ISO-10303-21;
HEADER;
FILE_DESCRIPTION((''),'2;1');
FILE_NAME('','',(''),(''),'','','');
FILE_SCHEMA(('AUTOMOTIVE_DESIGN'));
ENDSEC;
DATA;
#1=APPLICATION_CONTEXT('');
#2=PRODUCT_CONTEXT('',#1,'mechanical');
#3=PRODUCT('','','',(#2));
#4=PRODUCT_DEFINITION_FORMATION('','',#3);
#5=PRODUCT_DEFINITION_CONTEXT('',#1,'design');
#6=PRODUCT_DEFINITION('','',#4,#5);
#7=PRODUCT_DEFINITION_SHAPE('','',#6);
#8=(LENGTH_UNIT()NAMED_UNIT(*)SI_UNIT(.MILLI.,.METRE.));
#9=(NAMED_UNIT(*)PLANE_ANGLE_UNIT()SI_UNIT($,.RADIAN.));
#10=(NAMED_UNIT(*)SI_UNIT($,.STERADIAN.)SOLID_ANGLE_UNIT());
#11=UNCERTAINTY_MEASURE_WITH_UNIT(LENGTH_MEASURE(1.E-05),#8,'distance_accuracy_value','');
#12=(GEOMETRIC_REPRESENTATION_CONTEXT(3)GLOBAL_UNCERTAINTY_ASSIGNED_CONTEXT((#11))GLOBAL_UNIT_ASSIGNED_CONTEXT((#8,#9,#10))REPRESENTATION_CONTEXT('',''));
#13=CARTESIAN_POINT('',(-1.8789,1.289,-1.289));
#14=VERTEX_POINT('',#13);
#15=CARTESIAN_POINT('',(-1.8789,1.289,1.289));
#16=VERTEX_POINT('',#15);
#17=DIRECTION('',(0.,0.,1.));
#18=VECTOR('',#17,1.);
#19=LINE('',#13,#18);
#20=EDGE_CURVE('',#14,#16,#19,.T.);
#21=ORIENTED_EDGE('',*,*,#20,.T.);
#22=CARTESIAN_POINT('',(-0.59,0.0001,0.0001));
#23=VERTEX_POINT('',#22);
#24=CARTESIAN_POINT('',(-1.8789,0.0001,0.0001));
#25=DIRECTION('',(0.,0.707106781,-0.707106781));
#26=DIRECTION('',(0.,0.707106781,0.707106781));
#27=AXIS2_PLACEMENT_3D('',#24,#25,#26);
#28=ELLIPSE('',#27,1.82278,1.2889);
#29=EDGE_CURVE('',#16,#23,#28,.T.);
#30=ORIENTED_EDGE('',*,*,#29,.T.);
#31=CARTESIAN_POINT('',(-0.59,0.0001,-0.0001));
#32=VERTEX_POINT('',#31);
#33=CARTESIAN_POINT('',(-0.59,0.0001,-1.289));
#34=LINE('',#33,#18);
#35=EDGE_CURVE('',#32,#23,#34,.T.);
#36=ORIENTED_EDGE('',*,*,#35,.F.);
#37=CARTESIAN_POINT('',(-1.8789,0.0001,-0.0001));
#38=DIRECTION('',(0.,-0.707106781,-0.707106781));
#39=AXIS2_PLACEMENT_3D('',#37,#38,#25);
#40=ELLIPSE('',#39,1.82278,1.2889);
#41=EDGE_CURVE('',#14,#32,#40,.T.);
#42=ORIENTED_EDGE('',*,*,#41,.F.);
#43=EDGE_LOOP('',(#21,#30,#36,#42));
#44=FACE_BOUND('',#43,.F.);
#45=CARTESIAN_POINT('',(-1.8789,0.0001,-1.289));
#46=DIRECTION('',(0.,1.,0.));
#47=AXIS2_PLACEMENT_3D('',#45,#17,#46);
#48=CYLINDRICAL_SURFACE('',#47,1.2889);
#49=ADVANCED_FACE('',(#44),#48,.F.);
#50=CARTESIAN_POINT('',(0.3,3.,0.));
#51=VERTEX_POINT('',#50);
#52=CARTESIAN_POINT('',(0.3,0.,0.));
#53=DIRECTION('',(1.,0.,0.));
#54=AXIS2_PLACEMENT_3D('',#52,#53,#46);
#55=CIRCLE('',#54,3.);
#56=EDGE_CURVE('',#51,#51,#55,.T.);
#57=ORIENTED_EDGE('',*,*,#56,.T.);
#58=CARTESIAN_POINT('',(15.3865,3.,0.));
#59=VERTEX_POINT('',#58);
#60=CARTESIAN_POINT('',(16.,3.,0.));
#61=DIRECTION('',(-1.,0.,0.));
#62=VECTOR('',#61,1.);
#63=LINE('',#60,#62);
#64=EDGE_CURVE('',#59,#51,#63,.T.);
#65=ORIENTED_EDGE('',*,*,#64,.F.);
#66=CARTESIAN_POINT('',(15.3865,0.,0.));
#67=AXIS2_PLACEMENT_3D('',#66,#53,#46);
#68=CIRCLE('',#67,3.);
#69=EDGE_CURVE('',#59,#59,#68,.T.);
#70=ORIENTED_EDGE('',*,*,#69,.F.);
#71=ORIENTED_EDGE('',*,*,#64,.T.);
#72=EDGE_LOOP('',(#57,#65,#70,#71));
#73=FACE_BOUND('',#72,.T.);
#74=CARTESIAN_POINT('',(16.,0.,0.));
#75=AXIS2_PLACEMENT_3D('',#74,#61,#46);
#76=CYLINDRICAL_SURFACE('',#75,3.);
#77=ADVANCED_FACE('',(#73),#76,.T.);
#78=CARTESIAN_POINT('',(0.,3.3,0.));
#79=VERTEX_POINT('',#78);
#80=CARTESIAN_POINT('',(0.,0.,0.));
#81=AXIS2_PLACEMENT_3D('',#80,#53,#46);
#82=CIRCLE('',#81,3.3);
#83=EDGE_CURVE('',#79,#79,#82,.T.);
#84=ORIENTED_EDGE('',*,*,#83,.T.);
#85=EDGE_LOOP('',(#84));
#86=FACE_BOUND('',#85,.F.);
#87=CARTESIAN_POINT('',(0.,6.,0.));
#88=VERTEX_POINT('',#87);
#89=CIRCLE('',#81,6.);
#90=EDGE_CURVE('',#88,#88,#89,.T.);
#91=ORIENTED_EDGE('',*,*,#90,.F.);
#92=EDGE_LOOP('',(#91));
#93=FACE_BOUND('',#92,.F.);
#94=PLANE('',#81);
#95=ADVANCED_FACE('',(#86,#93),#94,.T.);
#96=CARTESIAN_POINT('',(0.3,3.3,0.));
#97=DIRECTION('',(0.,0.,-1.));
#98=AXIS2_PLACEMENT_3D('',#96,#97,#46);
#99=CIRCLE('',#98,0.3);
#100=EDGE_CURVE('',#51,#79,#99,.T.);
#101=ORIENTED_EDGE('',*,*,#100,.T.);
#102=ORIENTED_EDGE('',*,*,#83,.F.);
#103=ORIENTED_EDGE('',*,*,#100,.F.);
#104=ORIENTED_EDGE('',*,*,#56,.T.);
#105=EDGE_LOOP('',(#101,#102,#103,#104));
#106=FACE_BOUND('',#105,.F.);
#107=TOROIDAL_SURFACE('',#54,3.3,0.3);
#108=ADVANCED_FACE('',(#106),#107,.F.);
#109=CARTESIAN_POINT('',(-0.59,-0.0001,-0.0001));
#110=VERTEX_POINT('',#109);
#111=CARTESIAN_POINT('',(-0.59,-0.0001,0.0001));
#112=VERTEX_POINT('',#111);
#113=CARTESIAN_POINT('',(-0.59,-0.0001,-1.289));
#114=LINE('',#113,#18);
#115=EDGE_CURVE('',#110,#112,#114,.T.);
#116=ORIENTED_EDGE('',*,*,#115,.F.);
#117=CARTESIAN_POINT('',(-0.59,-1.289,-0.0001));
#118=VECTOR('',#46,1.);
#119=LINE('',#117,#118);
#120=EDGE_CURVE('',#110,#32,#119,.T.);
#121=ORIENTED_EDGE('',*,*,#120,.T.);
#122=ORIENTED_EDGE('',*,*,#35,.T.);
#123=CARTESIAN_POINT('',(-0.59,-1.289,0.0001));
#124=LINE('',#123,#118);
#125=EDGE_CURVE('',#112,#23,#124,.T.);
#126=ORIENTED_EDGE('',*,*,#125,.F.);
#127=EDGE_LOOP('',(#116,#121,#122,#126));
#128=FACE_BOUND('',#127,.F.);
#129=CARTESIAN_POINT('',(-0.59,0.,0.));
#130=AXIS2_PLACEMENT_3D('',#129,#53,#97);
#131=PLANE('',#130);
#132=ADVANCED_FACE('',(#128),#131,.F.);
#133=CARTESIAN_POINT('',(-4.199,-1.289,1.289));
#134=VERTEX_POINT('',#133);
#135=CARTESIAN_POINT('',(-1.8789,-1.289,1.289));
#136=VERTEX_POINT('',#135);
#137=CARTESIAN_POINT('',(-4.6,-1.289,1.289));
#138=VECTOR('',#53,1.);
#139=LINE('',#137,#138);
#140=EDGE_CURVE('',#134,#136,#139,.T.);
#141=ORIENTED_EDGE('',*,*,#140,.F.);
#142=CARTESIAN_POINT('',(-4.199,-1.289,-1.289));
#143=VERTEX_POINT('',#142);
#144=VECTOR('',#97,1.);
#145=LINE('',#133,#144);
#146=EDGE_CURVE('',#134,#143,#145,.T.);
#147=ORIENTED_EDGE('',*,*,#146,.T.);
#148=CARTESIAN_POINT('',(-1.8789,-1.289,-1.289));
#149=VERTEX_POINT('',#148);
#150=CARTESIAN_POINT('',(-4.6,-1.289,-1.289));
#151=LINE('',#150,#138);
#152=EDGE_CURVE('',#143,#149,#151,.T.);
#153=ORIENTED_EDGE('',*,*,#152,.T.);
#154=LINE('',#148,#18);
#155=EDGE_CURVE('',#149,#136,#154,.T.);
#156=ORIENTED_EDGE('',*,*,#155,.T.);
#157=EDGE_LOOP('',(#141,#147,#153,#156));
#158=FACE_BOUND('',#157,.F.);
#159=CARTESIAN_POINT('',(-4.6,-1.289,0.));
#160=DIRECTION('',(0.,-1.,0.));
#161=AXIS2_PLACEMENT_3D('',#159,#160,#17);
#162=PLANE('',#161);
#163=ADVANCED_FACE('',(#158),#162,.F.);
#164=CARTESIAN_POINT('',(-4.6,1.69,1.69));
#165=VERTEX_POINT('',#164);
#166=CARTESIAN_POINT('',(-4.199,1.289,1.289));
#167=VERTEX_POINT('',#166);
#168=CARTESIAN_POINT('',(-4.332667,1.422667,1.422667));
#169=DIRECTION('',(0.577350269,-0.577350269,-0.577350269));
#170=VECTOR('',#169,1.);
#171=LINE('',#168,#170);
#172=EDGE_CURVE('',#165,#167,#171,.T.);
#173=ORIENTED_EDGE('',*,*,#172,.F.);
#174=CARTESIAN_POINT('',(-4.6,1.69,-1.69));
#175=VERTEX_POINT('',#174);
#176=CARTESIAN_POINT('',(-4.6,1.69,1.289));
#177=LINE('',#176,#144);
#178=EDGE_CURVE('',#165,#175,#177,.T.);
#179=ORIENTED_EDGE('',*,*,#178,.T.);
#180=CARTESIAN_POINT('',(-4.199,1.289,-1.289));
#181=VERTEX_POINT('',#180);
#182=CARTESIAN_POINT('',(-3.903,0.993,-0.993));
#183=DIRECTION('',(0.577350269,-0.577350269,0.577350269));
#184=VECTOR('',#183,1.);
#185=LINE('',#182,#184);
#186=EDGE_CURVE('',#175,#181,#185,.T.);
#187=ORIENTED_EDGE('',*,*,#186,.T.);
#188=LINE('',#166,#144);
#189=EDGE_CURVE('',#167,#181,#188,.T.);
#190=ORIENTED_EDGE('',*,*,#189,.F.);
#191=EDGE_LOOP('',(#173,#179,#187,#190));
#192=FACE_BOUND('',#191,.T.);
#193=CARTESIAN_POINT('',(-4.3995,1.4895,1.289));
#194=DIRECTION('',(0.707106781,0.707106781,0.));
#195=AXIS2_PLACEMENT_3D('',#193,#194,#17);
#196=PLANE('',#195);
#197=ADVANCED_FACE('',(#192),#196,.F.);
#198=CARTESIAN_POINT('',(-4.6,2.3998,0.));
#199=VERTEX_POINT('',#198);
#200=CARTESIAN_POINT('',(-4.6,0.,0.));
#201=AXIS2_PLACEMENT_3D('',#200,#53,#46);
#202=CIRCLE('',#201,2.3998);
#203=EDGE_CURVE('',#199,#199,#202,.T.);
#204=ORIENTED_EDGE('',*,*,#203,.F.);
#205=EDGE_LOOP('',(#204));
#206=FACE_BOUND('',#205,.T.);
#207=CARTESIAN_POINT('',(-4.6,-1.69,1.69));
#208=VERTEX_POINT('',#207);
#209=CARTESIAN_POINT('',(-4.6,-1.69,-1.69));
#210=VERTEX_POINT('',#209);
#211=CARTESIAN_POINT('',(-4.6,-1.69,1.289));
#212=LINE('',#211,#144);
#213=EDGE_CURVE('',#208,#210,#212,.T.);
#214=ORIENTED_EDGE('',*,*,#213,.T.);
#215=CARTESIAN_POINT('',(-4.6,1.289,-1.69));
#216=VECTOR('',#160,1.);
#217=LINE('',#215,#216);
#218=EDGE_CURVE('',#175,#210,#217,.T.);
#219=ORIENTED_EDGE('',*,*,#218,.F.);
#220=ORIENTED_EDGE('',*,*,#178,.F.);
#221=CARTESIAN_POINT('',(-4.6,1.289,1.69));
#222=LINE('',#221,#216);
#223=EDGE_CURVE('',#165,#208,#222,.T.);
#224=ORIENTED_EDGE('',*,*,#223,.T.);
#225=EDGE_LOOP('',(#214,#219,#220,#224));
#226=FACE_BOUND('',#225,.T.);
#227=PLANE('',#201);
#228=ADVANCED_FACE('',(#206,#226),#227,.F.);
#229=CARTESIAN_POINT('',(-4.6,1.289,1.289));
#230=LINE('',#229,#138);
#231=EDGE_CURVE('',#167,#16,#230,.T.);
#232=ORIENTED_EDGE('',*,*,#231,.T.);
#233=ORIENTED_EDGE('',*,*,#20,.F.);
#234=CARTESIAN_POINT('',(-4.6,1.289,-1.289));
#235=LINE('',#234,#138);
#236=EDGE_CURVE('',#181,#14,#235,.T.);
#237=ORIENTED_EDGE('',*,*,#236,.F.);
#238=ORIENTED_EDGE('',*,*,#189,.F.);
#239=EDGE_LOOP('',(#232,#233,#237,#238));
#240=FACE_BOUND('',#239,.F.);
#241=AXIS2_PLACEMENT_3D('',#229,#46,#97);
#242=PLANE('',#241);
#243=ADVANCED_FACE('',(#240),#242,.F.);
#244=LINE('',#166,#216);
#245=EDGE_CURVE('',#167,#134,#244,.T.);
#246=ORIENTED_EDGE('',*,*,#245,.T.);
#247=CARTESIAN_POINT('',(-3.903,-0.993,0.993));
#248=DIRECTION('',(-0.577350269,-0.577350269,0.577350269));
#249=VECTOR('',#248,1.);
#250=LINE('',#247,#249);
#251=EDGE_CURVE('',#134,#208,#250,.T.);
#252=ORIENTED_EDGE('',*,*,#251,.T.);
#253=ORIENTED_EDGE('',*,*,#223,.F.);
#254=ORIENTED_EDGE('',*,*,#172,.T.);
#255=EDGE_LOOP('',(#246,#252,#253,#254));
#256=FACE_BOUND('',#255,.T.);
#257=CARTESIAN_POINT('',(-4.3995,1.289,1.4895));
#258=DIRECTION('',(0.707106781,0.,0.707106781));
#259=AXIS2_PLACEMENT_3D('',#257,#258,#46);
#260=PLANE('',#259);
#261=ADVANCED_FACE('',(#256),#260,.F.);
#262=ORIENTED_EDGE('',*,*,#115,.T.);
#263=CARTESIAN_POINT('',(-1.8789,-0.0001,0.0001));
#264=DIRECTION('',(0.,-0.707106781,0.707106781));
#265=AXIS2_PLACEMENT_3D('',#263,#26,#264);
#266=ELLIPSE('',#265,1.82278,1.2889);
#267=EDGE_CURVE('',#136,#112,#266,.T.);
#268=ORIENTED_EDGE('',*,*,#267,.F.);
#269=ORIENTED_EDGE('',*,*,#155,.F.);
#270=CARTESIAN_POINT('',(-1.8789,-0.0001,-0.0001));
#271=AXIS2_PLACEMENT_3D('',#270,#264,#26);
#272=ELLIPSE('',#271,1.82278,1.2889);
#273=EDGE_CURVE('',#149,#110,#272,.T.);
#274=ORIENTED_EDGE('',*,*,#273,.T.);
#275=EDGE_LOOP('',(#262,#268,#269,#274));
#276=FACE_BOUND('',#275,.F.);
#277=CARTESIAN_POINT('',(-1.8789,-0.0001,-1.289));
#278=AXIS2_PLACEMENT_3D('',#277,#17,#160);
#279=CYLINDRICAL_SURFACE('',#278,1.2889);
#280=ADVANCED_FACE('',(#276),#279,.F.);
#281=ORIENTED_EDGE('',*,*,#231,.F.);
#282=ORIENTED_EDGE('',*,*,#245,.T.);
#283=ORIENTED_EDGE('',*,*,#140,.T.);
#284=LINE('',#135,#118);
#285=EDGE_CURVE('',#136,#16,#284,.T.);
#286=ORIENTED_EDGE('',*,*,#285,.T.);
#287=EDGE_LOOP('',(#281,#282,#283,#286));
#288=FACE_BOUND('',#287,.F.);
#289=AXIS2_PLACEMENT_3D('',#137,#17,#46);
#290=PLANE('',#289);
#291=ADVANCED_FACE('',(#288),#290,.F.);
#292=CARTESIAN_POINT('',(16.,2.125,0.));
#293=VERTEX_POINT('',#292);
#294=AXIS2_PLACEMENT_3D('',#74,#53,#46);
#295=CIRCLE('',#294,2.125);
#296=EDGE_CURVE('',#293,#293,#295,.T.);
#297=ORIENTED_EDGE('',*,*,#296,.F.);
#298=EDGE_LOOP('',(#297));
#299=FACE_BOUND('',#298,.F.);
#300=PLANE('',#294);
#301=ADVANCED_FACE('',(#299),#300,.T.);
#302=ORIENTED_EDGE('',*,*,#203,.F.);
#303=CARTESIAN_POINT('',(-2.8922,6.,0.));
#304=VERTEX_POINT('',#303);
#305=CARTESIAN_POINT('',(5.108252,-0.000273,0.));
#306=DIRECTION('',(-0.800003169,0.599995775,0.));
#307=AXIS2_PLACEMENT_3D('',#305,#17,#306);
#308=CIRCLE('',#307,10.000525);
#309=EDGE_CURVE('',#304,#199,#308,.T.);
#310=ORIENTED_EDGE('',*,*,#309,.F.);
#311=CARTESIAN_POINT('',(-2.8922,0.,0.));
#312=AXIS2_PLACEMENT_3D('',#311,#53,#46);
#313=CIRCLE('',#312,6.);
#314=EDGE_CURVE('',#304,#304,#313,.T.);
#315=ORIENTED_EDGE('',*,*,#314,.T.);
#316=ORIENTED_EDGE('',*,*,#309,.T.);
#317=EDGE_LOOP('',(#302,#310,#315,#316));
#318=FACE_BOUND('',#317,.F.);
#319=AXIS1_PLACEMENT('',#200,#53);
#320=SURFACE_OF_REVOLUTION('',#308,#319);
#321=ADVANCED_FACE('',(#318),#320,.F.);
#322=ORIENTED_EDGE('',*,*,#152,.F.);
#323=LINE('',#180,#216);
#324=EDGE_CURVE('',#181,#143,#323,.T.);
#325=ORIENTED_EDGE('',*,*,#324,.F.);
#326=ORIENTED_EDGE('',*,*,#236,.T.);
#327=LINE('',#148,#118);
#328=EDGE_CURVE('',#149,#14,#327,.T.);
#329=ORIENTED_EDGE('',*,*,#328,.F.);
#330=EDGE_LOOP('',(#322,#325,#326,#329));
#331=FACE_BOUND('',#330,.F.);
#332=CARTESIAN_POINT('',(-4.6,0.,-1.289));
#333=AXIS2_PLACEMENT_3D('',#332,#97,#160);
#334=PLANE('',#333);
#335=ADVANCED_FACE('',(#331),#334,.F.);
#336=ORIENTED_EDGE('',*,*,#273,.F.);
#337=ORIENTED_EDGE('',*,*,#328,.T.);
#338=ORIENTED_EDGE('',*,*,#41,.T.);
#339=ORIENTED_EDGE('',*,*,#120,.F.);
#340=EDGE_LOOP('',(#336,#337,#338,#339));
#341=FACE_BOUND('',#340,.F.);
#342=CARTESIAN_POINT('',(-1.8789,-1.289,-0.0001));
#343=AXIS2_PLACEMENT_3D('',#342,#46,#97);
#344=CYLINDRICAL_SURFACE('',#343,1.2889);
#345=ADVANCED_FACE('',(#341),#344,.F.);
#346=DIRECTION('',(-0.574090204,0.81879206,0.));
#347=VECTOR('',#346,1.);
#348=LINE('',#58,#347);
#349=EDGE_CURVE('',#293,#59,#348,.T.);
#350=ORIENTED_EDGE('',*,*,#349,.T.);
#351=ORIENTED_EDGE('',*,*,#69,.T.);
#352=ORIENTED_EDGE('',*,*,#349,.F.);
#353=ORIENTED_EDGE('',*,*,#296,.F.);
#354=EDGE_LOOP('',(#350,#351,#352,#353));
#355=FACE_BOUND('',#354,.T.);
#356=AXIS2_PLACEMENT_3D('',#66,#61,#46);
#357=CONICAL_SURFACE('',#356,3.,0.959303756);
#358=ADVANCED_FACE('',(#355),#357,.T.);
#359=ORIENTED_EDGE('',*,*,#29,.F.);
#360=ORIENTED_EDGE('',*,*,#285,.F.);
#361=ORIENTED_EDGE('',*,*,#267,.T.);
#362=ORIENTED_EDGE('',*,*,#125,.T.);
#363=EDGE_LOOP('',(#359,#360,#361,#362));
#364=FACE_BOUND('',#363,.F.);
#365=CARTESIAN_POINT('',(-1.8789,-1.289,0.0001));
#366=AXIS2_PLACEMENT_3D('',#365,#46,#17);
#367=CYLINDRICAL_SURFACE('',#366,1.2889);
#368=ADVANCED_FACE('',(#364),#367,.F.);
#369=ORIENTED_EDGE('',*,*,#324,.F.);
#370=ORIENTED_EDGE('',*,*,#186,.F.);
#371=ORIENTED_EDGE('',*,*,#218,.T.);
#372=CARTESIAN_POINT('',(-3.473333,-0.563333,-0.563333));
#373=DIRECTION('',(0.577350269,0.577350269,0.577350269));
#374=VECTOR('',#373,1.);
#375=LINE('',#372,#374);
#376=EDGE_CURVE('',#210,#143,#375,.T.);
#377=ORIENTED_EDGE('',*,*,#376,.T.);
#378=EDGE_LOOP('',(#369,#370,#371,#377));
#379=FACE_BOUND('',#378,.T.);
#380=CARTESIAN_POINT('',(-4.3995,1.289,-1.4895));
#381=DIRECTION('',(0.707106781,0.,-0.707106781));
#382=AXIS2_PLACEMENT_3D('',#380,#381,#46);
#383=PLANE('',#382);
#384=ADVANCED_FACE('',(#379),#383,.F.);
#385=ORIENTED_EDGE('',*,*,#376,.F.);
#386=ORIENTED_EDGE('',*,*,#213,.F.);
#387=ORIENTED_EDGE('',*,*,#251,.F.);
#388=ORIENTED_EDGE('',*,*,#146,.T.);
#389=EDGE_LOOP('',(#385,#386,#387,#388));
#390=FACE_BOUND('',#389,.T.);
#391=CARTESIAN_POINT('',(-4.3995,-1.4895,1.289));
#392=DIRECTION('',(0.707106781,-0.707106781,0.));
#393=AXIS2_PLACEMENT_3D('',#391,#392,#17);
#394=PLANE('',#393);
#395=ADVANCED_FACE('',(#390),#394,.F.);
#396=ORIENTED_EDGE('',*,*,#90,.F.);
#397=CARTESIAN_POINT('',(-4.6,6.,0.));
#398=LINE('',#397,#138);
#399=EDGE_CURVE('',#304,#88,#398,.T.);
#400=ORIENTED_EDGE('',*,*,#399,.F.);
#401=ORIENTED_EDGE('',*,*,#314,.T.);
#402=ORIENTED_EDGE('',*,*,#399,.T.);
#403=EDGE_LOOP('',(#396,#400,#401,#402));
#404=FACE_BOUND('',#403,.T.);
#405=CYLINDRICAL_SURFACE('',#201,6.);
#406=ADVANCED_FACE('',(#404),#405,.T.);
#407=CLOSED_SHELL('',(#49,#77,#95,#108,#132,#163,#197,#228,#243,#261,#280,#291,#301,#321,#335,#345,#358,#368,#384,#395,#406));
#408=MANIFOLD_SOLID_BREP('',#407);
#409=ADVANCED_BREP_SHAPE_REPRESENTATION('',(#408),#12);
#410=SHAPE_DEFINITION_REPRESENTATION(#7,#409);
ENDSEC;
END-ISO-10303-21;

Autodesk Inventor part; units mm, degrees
ref_plane "YZ Plane" through (0, 0, 0) normal (1, 0, 0) x (0, 1, 0)
sketch "Sketch1" plane through (0, 0, 0) normal (0, 0, 1) x (1, 0, 0)
  line L0 (-0.59, 0) -> (16, 0)
  line L1 (16, 0) -> (16, 3)
  line L2 (16, 3) -> (0, 3)
  line L3 (0, 3) -> (0, 6)
  line L4 (-9.3003, 0) -> (20.2167, 0) projected
  line L5 (0, -1.2172) -> (0, 7.3031) projected
  line L6 (-4.6, 2.3998) -> (-5.0836, 2.3998) construction
  line L7 (-4.6, 0) -> (-0.59, 0)
  line L8 (0, 0) -> (-0.59, 0)
  line L9 (-4.6, 0) -> (-4.6, 6)
  arc A0 (-2.8922, 6) -> (-4.6, 2.3998) centre (5.1078, 0) ccw
  line L10 (-4.6, 6) -> (0, 6)
  dimension "d0" = 16
  dimension "d1" = 6
  dimension "d2" = 12
  dimension "d4" = 4.7996
  dimension "d13" = 4.6
  dimension "d14" = 4.01
  dimension "d46" = 10
  dimension "d47" = 0
revolve "Body" add sketch "Sketch1" angle 360 about axis through (-0.59, 0, 0) along (1, 0, 0) contours L4 L9 A0 L10 L3 L5 L0 | L5 L2 L1 L0
ref_plane "IDS_WORKPLANE{1}" through (-4.6, 0, 0) normal (1, 0, 0) x (0, 0, -1)
sketch "Sketch2" plane through (-4.6, 0, 0) normal (1, 0, 0) x (0, 0, -1)
  line L0 (0, -8.4) -> (0, 8.4) projected
  line L1 (8.4, 0) -> (-8.4, 0) projected
  line L2 (-1.289, 1.289) -> (1.289, 1.289)
  line L3 (1.289, 1.289) -> (1.289, -1.289)
  line L4 (1.289, -1.289) -> (-1.289, -1.289)
  line L5 (-1.289, -1.289) -> (-1.289, 1.289)
  line L6 (0, 1.289) -> (0, -1.289) construction
  line L7 (-1.289, 0) -> (1.289, 0) construction
  dimension "d7" = 2.578
  dimension "d9" = 2.578
extrude "Extrusion" cut sketch "Sketch2" along normal blind 4.01
fillet "Fillet1" radius 1.289 4 edges at (-0.59, 0, -1.289) (-0.59, -1.289, 0) (-0.59, 0, 1.289) (-0.59, 1.289, 0)
chamfer "Chamfer1" distance 0.401 angle 45 4 edges at (-4.6, 1.289, 0) (-4.6, 0, -1.289) (-4.6, -1.289, 0) (-4.6, 0, 1.289)
thread "Thread" size "M6x1" class "6g" standard "ISO Metric profile" length 15
chamfer "Chamfer2" distance 0.875 distance2 0.6135 1 edges at (16, -3, 0) measured on face at (16, -1.1424, 0.935)
ref_plane "Work Plane2" through (69.85, 0, 0) normal (0, 0, -1) x (1, 0, 0)
fillet "Fillet2" radius 0.3 1 edges at (0, -3, 0)
equation "\"d0\" = NLG"
equation "\"d1\" = GD"
equation "\"d2\" = KOD"
equation "\"d4\" = 1.42 * KOM"
equation "\"d13\" = KOH"
equation "\"d14\" = STI"
equation "\"d46\" = KR"
equation "\"d7\" = KOM - 0.2 * STI"
equation "\"d9\" = KOM - 0.2 * STI"
equation "\"d48\" = STI"
equation "\"d50\" = -0.1 * STI + 0.5 * KOM"
equation "\"d51\" = 0.1 * STI"
equation "\"d18\" = GEL"
equation "\"d20\" = -0.5 * SPD + 0.5 * GD"
equation "\"d21\" = GUL"
equation "\"d44\" = R"
equation "\"GD\" = 6"
equation "\"NLG\" = 16"
equation "\"GEL\" = 15"
equation "\"KOD\" = 12"
equation "\"KOH\" = 4.6"
equation "\"SPD\" = 4.25"
equation "\"KR\" = 10"
equation "\"RR\" = 2"
equation "\"GUL\" = 0.61345 * PTC"
equation "\"KEWI\" = 0"
equation "\"SDM\" = 3.38"
equation "\"STI\" = 4.01"
equation "\"d6\" = -KOH"
equation "\"R\" = 0.3"
equation "\"KOM\" = 3.38"
equation "\"PTC\" = 1"
properties part number "ANSI B18.6.7M - M6x1 x 16, SRPHMSTIM" material "Steel, Mild"
